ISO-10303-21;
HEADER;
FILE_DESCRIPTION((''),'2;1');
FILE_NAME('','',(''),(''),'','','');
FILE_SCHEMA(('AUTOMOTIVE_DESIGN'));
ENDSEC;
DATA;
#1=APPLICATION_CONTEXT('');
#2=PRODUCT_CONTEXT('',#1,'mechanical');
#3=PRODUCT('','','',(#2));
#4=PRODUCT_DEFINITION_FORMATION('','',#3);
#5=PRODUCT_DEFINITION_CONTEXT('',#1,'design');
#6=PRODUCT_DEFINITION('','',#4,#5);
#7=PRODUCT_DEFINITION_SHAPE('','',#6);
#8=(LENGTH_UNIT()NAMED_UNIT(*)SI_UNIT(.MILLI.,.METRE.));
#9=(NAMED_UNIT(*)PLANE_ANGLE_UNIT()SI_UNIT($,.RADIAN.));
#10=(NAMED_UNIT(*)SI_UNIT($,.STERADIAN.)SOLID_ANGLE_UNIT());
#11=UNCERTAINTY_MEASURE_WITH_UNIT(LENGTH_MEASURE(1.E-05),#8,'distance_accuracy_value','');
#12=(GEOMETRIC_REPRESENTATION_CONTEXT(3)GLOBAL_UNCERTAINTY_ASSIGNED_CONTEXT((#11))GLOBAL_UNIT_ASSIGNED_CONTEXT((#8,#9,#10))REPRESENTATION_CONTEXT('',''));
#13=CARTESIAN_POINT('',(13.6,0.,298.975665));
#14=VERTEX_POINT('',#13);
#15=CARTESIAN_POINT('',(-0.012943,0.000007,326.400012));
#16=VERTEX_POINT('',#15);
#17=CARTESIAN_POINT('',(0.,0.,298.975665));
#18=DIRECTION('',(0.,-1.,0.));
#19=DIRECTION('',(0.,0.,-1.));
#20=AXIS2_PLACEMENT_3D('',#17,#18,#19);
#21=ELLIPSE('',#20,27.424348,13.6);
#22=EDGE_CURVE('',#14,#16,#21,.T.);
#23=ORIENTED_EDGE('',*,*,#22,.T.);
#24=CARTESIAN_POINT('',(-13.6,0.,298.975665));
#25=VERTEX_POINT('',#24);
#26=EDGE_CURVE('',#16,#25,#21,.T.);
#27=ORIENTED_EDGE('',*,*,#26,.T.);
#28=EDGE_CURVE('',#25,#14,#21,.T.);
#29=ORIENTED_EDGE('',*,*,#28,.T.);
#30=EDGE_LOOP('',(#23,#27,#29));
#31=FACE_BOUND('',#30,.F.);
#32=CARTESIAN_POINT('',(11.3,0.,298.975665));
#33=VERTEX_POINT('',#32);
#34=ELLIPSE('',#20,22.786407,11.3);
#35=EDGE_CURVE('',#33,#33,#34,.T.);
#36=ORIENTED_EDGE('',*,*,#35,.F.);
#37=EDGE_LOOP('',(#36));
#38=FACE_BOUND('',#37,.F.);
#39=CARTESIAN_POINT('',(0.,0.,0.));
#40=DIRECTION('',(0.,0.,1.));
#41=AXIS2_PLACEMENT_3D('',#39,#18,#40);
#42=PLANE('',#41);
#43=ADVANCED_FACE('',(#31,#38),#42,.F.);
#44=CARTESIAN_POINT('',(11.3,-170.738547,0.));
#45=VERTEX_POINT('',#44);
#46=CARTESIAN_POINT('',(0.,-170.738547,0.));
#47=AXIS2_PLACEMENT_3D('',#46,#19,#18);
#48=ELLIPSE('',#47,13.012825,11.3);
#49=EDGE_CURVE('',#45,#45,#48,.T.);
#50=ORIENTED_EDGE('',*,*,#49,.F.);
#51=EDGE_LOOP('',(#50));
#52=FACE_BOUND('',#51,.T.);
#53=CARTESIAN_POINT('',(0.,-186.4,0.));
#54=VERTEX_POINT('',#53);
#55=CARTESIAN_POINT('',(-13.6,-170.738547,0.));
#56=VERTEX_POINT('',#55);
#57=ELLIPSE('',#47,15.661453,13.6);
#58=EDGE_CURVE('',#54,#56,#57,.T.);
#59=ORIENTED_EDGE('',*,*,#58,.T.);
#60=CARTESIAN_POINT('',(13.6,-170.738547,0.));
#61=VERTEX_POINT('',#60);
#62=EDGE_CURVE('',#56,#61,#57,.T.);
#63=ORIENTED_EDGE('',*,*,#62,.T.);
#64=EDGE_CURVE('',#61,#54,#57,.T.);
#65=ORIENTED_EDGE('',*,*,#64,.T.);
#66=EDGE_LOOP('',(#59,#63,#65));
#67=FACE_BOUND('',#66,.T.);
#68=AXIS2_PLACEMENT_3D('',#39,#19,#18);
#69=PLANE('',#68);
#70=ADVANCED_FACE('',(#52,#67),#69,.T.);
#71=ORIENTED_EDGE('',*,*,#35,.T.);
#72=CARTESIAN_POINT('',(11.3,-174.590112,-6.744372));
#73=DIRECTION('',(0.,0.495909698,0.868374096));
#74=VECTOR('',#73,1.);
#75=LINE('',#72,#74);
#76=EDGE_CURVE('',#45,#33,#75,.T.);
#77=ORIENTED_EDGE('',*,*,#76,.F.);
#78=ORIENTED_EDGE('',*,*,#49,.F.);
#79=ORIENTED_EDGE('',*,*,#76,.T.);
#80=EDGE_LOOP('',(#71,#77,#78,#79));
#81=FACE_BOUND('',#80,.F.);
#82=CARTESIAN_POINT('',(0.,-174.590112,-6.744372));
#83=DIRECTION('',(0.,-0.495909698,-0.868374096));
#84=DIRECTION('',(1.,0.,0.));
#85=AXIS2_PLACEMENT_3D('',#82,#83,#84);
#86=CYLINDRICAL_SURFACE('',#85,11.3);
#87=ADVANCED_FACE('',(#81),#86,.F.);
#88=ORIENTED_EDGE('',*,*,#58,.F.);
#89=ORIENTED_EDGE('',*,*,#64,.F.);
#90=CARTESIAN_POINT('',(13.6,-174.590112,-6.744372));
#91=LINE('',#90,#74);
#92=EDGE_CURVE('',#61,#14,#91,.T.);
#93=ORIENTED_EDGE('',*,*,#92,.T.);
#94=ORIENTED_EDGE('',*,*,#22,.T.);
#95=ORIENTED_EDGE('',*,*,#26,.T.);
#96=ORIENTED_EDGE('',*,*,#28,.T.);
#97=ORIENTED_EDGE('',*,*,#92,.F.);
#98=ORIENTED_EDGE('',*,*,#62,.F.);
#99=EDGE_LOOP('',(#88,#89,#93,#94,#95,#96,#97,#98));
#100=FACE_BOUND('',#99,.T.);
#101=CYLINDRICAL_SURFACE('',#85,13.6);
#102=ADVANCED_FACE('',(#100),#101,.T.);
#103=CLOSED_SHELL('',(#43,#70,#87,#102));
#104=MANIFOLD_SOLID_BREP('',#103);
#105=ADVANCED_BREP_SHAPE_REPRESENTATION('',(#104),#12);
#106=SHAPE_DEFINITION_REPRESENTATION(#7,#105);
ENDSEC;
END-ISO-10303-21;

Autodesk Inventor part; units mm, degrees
ref_plane "XZ Plane" through (0, 0, 0) normal (0, 1, 0) x (-1, 0, 0)
ref_plane "XY Plane" through (0, 0, 0) normal (0, 0, 1) x (1, 0, 0)
sketch "スケッチ1" plane through (0, 0, 0) normal (1, 0, 0) x (0, 1, 0)
  line L0 (0, 0) -> (-186.4, 0)
  line L1 (0, 0) -> (0, 326.4)
  line L2 (0, 326.4) -> (-186.4, 0)
  dimension "d0" = 186.4
  dimension "d1" = 326.4
ref_plane "作業平面1" through (0, -186.4, 0) normal (0, -0.4959097, -0.8683741) x (1, 0, 0)
sketch "スケッチ3" plane through (0, -186.4, 0) normal (0, -0.4959097, -0.8683741) x (1, 0, 0)
  circle A0 centre (0, -13.6) radius 13.6
  circle A1 centre (0, -13.6) radius 11.3
  point P0 (0, -161.8649)
  point P1 (0, 0)
  dimension "d4" = 27.2
  dimension "d5" = 13.6
  dimension "d6" = 2.3
extrude "押し出し1" add sketch "スケッチ3" against normal up to surface (375.8749 mm away)
extrude "押し出し2" cut sketch "スケッチ1" along normal mid plane 27.2 keep common part
ref_plane "作業平面2" through (-13.6, -174.5901, -6.7444) normal (-1, 0, 0) x (0, -1, 0)
ref_plane "作業平面3" through (13.6, -174.5901, -6.7444) normal (1, 0, 0) x (0, 1, 0)
sketch "スケッチ4" plane through (13.6, -174.5901, -6.7444) normal (1, 0, 0) x (0, 1, 0)
  line L0 (174.5901, 278.2957) -> (174.5901, 333.1444) construction
  line L1 (-11.8099, 6.7444) -> (19.513, 6.7444) construction
  line L2 (174.5901, 333.1444) -> (-11.8099, 6.7444) construction
  line L3 (174.5901, 278.2957) -> (19.513, 6.7444) construction
  line L4 (174.5901, 278.2957) -> (150.9703, 291.7844) construction
  line L5 (19.513, 6.7444) -> (-4.1068, 20.2331) construction
  line L6 (-11.8099, 6.7444) -> (174.5901, 333.1444) construction
  point P0 (174.5901, 6.7444)
  dimension "d11" = 375.8749
  dimension "d12" = 312.7124
  dimension "d13" = 27.2
  dimension "d14" = 29.73
  dimension "d15" = 60.27
  dimension "d16" = 47.6292
  dimension "d17" = 15.5333
properties part number "Pipe7" material "鋼、炭素鋼"
